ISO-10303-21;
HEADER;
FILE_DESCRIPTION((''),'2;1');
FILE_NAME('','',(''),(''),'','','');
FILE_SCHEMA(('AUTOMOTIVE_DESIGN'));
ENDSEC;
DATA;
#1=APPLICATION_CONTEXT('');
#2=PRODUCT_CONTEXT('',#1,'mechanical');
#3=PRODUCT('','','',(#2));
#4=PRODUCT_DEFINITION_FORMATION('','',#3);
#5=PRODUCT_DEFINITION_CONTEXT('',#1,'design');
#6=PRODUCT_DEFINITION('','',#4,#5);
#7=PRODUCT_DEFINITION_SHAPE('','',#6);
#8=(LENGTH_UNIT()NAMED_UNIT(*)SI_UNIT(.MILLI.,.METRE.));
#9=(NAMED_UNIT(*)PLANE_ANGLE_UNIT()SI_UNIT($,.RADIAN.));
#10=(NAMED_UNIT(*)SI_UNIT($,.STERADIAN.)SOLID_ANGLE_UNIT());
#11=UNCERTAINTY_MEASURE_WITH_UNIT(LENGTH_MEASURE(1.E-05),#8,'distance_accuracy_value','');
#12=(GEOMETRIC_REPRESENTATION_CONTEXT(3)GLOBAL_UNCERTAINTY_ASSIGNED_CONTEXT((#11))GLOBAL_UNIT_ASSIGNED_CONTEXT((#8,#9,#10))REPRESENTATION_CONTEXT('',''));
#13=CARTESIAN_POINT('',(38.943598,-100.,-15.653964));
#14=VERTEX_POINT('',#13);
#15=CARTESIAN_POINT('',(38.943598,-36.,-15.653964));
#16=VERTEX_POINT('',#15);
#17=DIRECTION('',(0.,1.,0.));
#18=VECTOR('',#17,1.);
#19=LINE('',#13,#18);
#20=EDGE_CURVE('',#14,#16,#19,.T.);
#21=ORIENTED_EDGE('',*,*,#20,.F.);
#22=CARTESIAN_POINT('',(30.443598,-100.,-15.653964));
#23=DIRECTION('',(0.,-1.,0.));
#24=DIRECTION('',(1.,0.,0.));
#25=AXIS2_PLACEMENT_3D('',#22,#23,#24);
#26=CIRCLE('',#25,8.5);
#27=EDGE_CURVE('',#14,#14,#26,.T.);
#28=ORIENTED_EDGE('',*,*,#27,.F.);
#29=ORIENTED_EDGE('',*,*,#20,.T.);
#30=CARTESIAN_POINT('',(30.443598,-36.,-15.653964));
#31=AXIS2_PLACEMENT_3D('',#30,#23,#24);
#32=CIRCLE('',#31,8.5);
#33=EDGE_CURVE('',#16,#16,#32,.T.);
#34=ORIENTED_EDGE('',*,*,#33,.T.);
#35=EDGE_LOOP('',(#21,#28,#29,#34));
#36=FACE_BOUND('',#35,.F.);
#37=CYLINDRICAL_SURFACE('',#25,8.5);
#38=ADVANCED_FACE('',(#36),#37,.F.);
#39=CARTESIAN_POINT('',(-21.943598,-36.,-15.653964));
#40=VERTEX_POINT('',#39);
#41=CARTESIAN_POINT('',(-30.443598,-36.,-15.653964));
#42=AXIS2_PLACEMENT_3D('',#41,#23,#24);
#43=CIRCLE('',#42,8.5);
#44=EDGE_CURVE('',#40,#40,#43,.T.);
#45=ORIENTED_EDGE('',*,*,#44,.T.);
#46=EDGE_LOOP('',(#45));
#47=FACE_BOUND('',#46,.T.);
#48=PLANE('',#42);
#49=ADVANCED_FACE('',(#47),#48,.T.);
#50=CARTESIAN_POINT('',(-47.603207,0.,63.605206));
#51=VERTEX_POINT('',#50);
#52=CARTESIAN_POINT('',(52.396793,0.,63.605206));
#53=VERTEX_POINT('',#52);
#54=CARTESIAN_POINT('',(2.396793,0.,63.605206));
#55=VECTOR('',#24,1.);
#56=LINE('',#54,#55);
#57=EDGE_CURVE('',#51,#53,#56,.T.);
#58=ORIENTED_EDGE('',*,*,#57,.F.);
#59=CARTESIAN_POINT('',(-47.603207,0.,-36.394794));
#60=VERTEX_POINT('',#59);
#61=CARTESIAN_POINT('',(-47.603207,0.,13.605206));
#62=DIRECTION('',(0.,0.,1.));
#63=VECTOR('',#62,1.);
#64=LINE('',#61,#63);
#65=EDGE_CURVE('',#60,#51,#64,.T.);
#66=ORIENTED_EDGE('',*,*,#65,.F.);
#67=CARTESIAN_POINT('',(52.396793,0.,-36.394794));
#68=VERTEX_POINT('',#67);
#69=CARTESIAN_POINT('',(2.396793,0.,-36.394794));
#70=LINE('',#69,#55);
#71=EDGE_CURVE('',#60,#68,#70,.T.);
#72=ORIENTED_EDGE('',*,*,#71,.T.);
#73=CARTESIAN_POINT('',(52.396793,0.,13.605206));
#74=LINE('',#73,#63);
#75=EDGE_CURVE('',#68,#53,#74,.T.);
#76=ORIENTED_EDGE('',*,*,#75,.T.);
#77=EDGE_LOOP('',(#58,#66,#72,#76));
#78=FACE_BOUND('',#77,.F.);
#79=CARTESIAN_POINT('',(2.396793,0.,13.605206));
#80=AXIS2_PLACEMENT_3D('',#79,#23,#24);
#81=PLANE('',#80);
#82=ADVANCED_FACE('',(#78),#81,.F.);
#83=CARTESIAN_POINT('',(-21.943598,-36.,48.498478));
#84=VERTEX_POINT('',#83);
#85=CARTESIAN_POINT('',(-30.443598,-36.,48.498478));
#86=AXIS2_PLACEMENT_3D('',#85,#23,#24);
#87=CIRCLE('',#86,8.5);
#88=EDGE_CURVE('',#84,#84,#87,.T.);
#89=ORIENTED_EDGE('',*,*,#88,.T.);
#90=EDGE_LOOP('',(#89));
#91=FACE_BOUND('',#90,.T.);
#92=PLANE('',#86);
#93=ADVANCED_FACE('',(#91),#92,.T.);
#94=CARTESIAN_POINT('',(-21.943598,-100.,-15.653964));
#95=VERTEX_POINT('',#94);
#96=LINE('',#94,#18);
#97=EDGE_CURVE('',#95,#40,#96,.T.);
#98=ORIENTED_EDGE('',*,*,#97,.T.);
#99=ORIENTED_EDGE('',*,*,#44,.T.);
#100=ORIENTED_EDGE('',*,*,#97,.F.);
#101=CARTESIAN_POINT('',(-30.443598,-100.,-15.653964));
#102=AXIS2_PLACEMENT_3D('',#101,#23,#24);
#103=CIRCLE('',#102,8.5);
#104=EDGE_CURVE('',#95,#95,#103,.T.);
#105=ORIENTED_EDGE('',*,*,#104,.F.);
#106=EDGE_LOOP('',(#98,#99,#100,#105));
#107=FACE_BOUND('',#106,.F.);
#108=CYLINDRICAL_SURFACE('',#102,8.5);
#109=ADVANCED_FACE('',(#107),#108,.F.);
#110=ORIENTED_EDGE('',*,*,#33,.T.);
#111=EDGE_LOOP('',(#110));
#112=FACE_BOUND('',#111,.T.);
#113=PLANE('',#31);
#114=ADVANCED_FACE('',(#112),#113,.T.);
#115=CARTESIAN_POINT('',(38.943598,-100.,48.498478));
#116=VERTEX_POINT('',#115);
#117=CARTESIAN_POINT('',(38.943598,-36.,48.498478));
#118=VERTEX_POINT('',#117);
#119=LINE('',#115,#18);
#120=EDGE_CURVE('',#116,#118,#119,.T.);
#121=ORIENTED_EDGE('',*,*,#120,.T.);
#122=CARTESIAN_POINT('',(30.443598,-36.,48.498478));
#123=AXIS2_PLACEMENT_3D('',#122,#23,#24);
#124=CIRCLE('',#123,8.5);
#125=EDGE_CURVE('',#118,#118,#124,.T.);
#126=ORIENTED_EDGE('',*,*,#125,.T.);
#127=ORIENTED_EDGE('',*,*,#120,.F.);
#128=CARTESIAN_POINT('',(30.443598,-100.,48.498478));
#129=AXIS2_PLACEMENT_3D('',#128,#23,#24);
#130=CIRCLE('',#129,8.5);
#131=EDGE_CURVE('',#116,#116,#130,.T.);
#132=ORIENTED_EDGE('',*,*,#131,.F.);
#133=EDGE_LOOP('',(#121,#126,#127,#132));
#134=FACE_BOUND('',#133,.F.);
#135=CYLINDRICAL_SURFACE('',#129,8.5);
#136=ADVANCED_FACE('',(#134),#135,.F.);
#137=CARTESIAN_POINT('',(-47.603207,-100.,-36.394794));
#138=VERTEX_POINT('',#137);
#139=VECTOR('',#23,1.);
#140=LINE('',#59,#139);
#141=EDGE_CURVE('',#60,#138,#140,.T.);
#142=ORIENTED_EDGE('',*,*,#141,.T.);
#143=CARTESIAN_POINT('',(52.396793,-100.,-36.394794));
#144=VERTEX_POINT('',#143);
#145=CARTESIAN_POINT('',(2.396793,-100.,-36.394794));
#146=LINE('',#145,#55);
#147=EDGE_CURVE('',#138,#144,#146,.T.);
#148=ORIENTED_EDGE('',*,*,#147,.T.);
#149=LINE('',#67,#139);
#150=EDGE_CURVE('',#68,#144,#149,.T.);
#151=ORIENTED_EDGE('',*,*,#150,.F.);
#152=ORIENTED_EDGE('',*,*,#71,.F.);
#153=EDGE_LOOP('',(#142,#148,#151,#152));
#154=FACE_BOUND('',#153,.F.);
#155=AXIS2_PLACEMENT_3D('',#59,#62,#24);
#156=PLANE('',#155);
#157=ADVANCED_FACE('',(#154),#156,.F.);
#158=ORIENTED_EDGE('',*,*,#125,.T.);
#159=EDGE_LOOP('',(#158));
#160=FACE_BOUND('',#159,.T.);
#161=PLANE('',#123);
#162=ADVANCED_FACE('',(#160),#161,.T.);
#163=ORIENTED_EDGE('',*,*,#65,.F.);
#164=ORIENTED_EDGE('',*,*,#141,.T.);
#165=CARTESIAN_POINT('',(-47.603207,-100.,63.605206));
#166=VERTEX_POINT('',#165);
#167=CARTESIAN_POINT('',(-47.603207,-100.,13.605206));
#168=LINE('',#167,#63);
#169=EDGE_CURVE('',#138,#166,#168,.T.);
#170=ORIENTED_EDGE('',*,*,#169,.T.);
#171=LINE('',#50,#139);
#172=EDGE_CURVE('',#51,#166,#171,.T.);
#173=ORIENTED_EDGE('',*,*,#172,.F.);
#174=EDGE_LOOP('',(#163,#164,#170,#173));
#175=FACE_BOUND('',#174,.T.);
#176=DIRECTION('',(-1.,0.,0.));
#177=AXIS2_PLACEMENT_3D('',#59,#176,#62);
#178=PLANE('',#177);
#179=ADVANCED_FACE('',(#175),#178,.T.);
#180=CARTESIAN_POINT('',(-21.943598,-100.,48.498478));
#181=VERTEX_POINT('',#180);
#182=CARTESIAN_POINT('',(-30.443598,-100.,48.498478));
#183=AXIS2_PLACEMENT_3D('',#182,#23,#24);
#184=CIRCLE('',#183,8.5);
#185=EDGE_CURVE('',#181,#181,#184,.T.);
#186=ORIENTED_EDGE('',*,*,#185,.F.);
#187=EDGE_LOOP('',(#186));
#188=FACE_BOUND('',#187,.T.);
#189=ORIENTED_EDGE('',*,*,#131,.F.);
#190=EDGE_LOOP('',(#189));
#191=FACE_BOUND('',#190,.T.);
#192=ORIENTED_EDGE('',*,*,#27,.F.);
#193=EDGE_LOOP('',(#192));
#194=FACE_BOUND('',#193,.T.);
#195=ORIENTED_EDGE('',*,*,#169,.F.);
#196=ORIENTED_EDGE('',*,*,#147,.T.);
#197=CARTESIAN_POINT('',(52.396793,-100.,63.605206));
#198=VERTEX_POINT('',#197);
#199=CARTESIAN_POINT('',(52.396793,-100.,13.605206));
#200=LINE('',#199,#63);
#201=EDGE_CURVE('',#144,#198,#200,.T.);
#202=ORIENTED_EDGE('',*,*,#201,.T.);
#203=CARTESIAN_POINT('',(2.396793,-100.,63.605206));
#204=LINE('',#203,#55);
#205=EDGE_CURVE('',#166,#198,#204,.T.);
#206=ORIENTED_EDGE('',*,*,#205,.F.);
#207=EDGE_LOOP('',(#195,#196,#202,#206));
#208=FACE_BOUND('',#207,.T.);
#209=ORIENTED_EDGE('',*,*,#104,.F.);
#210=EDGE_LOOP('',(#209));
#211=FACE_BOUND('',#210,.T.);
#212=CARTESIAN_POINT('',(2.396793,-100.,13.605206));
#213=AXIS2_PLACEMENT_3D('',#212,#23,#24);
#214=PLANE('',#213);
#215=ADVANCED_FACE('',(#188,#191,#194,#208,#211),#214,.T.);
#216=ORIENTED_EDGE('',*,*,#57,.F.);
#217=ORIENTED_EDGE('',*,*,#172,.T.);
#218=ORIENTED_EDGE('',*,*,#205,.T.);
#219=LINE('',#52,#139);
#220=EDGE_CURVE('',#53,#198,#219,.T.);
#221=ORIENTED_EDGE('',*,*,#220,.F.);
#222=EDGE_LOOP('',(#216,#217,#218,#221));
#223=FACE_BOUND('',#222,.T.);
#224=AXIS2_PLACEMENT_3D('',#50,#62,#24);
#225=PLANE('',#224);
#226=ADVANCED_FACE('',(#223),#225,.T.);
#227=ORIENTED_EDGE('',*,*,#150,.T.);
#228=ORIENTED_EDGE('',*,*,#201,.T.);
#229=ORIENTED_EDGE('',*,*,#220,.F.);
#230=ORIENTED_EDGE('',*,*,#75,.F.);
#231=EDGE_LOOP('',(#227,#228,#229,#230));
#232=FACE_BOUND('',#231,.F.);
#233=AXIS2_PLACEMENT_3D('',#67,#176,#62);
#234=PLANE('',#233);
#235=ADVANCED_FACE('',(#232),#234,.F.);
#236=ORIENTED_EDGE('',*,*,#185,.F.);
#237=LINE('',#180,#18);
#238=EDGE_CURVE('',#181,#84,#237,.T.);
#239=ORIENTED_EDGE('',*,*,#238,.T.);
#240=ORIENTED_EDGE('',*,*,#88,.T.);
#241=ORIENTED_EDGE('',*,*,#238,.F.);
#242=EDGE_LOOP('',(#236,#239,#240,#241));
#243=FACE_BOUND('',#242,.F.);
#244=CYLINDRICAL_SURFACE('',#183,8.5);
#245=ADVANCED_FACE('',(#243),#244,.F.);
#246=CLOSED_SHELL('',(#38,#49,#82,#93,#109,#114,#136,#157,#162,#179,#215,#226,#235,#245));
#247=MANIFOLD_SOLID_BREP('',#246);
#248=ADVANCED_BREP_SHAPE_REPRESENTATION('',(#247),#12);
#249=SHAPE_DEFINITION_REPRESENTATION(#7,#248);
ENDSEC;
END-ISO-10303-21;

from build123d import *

# Parameters (mm, degrees)
F0_W     = 100
F0_H     = 100
F1_DEPTH = 100
F2_R     = 8.5
F3_DEPTH = 64
F5_ANGLE = 180


# Not quite as in the source:
# - a feature names something its author has since deleted; it is built from what else it names


with BuildPart() as f1:
    # F0 (on Front) → F1 (new body)
    with BuildSketch(Plane.XZ):
        with Locations((2.3967929184, 13.6052064598)):
            Rectangle(F0_W, F0_H)
    extrude(amount=F1_DEPTH)

    # F2 (on face) → F3 (cut)
    with BuildSketch(Plane.XZ.offset(100)):
        with Locations((30.443597585, 48.4984777868)):
            Circle(F2_R)
        with Locations((-30.443597585, -15.6539641321)):
            Circle(F2_R)
        with Locations((30.443597585, -15.6539641321)):
            Circle(F2_R)
        with Locations((-30.443597585, 48.4984777868)):
            Circle(F2_R)
    extrude(amount=-F3_DEPTH, mode=Mode.SUBTRACT)

    # F4 (on face) → F5 (revolve, cut)
    with BuildSketch(Plane.XZ.offset(100)):
        with BuildLine():
            Line((0, 0), (0, 26.83))
            ThreePointArc((0, 26.83), (-13.415, 13.415), (0, 0))
        make_face()
    revolve(axis=Axis((0, -100, 14.3139522988), (0, 0, 1)), revolution_arc=F5_ANGLE, mode=Mode.SUBTRACT)


solid = f1.part
